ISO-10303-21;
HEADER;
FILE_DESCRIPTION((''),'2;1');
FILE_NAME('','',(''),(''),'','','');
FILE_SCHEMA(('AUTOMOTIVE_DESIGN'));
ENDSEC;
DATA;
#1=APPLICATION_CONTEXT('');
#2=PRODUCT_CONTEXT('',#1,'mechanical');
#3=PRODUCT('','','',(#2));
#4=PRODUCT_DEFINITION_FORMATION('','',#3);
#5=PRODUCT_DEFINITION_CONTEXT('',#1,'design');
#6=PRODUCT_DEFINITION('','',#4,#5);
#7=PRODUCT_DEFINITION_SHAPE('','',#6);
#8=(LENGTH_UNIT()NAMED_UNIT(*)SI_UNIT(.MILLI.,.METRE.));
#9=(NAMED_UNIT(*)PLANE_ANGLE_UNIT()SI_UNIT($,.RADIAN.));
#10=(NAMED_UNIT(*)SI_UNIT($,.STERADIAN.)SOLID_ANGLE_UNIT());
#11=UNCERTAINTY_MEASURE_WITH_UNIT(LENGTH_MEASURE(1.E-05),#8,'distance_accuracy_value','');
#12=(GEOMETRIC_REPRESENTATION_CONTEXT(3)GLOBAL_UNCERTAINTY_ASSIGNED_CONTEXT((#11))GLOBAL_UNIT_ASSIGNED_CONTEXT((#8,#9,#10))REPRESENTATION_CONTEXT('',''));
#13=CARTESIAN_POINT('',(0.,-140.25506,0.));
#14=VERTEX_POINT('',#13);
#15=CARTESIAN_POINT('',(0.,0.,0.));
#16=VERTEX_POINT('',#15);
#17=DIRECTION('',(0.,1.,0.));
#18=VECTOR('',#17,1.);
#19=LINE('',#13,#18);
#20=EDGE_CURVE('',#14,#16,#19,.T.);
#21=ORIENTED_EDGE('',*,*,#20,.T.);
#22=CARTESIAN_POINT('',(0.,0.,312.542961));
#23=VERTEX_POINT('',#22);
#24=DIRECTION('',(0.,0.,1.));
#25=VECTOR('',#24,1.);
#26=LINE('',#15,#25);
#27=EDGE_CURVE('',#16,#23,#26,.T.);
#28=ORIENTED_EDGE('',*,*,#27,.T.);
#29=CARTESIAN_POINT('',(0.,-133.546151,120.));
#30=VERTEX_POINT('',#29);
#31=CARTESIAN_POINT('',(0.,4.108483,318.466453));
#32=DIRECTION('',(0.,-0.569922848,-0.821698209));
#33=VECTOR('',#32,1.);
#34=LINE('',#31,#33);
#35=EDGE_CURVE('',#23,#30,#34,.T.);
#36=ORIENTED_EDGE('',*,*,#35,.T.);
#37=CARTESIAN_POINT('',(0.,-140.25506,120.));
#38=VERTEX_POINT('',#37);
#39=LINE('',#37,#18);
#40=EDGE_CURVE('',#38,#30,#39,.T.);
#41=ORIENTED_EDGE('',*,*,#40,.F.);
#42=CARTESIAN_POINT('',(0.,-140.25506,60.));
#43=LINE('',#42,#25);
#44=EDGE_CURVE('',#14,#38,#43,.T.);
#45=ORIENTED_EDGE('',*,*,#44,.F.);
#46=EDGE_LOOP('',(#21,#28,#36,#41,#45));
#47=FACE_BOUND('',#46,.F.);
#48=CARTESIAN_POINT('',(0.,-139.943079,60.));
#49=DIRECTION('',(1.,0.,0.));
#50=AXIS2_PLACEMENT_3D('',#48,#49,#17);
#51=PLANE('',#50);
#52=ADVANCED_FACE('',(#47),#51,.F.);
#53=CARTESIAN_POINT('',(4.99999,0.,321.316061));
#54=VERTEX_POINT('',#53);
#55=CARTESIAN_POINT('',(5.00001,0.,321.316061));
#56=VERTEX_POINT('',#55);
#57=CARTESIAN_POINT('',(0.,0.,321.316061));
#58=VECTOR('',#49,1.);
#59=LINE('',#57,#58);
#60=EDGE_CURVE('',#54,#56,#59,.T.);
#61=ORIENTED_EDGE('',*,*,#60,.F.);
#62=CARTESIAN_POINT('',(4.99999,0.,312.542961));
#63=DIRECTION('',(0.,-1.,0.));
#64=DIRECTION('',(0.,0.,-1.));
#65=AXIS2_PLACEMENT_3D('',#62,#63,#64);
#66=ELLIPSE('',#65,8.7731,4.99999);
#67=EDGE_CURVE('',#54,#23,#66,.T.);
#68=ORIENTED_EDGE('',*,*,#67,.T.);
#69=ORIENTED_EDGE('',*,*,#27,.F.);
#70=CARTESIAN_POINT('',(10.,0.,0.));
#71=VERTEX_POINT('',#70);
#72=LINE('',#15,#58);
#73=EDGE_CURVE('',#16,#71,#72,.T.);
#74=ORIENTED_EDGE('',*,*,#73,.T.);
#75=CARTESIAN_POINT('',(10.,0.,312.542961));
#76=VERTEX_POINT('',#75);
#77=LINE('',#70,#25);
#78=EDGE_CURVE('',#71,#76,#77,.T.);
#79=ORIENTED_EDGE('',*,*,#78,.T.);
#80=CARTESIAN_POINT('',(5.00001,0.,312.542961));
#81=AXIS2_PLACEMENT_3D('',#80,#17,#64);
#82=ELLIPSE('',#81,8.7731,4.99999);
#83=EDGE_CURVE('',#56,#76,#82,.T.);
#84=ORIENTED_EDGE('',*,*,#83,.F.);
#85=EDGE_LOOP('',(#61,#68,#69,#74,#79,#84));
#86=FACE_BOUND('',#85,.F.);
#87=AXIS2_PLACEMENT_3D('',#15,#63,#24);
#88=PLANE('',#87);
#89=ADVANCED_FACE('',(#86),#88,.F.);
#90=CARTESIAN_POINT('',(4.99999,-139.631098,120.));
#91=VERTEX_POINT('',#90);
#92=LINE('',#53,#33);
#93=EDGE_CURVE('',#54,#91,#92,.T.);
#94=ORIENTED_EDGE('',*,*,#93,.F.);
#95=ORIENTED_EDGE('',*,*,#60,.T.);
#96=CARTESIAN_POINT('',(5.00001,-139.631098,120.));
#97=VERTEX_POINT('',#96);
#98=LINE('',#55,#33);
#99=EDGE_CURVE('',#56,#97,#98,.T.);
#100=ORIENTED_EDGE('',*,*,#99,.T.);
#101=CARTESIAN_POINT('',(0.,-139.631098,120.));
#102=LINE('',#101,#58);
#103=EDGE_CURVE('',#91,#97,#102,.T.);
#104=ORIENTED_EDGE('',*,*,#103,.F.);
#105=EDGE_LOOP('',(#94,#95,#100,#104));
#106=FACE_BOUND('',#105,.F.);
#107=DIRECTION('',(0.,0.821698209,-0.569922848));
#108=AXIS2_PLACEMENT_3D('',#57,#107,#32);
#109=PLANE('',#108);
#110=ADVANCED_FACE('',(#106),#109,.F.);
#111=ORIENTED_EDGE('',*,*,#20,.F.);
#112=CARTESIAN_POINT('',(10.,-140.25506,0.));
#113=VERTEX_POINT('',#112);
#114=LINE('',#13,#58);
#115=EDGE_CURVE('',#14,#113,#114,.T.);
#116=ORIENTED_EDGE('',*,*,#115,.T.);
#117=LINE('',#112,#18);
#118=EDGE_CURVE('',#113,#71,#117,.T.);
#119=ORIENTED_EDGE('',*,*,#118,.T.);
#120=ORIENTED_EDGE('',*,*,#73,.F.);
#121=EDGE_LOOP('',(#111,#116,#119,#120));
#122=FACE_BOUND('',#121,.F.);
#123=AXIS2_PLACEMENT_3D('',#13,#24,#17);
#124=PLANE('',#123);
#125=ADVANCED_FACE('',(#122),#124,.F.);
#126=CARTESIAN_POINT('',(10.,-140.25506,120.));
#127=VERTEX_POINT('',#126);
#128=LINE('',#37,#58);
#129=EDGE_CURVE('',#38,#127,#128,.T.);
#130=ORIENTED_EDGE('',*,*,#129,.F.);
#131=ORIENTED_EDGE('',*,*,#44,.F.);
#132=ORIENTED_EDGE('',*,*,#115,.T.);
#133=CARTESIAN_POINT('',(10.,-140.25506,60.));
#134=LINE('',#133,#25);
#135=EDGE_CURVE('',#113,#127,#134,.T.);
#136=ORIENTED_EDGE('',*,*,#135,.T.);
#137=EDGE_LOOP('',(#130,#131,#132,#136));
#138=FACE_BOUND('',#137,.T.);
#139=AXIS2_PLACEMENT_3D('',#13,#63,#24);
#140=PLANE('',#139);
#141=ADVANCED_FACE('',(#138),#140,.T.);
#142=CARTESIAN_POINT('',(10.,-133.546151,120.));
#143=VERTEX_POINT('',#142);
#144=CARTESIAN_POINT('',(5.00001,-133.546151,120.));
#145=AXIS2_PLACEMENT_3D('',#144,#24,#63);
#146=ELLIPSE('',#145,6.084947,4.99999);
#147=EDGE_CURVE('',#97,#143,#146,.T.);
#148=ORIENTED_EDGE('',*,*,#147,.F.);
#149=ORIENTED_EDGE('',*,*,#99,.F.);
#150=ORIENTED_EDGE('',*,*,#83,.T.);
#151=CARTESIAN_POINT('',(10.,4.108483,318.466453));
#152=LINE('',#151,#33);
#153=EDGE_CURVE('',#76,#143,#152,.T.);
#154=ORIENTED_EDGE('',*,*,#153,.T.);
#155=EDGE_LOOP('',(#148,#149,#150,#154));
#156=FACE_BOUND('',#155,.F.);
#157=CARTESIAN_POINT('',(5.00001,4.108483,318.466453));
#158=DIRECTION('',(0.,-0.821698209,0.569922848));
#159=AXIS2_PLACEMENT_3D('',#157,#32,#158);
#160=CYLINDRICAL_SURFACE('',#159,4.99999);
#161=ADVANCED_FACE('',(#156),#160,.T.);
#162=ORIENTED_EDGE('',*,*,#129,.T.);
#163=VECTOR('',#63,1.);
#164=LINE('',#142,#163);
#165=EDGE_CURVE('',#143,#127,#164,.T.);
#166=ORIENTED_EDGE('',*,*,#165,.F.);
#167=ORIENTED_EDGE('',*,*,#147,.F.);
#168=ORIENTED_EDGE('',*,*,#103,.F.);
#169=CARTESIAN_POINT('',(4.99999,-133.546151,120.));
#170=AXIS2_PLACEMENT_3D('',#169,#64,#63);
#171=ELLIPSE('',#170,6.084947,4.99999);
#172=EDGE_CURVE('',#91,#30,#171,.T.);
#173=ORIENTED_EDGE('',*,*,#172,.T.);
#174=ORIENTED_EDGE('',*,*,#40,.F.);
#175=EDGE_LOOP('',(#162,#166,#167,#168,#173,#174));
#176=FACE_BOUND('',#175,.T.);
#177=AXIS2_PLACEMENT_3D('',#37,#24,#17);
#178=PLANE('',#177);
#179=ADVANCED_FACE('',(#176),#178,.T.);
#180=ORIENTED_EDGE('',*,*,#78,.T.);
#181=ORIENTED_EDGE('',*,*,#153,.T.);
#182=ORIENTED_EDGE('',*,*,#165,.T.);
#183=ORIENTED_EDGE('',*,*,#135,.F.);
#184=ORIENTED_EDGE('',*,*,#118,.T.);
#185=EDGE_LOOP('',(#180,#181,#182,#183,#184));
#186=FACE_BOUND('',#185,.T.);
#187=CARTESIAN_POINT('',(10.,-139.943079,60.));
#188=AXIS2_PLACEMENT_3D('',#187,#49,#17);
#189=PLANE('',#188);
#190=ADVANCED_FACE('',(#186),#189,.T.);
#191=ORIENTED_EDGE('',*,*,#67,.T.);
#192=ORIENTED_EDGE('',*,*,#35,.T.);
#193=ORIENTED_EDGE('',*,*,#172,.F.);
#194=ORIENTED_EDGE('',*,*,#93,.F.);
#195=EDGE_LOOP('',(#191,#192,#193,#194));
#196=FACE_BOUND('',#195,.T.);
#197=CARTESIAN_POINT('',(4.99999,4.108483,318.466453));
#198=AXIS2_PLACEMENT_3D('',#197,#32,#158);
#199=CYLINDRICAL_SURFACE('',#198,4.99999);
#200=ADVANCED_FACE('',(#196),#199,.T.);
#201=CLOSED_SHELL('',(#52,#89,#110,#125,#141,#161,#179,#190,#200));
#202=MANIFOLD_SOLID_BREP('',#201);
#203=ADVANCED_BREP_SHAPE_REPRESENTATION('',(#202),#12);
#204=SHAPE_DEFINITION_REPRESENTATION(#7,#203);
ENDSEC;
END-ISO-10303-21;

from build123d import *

# Parameters (mm, degrees)
F0_W     = 0.6239625519
F0_H     = 120
F1_DEPTH = 10
F2_R     = 4.99999


# Not quite as in the source:
# - a fillet or chamfer is up to 0.001 mm smaller than in the source, because OpenCascade refuses the exact size


with BuildPart() as f1:
    # F0 (on Right) → F1 (new body)
    with BuildSketch(Plane.YZ):
        with Locations((-139.943079155, 60)):
            Rectangle(F0_W, F0_H)
        Polygon((-139.631097879, 120), (-139.631097879, 0), (0, 0), (0, 321.3160612199), align=None)
    extrude(amount=F1_DEPTH)

    # F2 (radius 5 in the source; OpenCascade refuses exactly that, so slightly less here)
    f2_edges = [f1.edges().sort_by_distance(p)[0] for p in [
        (10, -69.815549, 220.658031),
        (0, -69.815549, 220.658031),
    ]]
    fillet(f2_edges, radius=F2_R)


solid = f1.part
